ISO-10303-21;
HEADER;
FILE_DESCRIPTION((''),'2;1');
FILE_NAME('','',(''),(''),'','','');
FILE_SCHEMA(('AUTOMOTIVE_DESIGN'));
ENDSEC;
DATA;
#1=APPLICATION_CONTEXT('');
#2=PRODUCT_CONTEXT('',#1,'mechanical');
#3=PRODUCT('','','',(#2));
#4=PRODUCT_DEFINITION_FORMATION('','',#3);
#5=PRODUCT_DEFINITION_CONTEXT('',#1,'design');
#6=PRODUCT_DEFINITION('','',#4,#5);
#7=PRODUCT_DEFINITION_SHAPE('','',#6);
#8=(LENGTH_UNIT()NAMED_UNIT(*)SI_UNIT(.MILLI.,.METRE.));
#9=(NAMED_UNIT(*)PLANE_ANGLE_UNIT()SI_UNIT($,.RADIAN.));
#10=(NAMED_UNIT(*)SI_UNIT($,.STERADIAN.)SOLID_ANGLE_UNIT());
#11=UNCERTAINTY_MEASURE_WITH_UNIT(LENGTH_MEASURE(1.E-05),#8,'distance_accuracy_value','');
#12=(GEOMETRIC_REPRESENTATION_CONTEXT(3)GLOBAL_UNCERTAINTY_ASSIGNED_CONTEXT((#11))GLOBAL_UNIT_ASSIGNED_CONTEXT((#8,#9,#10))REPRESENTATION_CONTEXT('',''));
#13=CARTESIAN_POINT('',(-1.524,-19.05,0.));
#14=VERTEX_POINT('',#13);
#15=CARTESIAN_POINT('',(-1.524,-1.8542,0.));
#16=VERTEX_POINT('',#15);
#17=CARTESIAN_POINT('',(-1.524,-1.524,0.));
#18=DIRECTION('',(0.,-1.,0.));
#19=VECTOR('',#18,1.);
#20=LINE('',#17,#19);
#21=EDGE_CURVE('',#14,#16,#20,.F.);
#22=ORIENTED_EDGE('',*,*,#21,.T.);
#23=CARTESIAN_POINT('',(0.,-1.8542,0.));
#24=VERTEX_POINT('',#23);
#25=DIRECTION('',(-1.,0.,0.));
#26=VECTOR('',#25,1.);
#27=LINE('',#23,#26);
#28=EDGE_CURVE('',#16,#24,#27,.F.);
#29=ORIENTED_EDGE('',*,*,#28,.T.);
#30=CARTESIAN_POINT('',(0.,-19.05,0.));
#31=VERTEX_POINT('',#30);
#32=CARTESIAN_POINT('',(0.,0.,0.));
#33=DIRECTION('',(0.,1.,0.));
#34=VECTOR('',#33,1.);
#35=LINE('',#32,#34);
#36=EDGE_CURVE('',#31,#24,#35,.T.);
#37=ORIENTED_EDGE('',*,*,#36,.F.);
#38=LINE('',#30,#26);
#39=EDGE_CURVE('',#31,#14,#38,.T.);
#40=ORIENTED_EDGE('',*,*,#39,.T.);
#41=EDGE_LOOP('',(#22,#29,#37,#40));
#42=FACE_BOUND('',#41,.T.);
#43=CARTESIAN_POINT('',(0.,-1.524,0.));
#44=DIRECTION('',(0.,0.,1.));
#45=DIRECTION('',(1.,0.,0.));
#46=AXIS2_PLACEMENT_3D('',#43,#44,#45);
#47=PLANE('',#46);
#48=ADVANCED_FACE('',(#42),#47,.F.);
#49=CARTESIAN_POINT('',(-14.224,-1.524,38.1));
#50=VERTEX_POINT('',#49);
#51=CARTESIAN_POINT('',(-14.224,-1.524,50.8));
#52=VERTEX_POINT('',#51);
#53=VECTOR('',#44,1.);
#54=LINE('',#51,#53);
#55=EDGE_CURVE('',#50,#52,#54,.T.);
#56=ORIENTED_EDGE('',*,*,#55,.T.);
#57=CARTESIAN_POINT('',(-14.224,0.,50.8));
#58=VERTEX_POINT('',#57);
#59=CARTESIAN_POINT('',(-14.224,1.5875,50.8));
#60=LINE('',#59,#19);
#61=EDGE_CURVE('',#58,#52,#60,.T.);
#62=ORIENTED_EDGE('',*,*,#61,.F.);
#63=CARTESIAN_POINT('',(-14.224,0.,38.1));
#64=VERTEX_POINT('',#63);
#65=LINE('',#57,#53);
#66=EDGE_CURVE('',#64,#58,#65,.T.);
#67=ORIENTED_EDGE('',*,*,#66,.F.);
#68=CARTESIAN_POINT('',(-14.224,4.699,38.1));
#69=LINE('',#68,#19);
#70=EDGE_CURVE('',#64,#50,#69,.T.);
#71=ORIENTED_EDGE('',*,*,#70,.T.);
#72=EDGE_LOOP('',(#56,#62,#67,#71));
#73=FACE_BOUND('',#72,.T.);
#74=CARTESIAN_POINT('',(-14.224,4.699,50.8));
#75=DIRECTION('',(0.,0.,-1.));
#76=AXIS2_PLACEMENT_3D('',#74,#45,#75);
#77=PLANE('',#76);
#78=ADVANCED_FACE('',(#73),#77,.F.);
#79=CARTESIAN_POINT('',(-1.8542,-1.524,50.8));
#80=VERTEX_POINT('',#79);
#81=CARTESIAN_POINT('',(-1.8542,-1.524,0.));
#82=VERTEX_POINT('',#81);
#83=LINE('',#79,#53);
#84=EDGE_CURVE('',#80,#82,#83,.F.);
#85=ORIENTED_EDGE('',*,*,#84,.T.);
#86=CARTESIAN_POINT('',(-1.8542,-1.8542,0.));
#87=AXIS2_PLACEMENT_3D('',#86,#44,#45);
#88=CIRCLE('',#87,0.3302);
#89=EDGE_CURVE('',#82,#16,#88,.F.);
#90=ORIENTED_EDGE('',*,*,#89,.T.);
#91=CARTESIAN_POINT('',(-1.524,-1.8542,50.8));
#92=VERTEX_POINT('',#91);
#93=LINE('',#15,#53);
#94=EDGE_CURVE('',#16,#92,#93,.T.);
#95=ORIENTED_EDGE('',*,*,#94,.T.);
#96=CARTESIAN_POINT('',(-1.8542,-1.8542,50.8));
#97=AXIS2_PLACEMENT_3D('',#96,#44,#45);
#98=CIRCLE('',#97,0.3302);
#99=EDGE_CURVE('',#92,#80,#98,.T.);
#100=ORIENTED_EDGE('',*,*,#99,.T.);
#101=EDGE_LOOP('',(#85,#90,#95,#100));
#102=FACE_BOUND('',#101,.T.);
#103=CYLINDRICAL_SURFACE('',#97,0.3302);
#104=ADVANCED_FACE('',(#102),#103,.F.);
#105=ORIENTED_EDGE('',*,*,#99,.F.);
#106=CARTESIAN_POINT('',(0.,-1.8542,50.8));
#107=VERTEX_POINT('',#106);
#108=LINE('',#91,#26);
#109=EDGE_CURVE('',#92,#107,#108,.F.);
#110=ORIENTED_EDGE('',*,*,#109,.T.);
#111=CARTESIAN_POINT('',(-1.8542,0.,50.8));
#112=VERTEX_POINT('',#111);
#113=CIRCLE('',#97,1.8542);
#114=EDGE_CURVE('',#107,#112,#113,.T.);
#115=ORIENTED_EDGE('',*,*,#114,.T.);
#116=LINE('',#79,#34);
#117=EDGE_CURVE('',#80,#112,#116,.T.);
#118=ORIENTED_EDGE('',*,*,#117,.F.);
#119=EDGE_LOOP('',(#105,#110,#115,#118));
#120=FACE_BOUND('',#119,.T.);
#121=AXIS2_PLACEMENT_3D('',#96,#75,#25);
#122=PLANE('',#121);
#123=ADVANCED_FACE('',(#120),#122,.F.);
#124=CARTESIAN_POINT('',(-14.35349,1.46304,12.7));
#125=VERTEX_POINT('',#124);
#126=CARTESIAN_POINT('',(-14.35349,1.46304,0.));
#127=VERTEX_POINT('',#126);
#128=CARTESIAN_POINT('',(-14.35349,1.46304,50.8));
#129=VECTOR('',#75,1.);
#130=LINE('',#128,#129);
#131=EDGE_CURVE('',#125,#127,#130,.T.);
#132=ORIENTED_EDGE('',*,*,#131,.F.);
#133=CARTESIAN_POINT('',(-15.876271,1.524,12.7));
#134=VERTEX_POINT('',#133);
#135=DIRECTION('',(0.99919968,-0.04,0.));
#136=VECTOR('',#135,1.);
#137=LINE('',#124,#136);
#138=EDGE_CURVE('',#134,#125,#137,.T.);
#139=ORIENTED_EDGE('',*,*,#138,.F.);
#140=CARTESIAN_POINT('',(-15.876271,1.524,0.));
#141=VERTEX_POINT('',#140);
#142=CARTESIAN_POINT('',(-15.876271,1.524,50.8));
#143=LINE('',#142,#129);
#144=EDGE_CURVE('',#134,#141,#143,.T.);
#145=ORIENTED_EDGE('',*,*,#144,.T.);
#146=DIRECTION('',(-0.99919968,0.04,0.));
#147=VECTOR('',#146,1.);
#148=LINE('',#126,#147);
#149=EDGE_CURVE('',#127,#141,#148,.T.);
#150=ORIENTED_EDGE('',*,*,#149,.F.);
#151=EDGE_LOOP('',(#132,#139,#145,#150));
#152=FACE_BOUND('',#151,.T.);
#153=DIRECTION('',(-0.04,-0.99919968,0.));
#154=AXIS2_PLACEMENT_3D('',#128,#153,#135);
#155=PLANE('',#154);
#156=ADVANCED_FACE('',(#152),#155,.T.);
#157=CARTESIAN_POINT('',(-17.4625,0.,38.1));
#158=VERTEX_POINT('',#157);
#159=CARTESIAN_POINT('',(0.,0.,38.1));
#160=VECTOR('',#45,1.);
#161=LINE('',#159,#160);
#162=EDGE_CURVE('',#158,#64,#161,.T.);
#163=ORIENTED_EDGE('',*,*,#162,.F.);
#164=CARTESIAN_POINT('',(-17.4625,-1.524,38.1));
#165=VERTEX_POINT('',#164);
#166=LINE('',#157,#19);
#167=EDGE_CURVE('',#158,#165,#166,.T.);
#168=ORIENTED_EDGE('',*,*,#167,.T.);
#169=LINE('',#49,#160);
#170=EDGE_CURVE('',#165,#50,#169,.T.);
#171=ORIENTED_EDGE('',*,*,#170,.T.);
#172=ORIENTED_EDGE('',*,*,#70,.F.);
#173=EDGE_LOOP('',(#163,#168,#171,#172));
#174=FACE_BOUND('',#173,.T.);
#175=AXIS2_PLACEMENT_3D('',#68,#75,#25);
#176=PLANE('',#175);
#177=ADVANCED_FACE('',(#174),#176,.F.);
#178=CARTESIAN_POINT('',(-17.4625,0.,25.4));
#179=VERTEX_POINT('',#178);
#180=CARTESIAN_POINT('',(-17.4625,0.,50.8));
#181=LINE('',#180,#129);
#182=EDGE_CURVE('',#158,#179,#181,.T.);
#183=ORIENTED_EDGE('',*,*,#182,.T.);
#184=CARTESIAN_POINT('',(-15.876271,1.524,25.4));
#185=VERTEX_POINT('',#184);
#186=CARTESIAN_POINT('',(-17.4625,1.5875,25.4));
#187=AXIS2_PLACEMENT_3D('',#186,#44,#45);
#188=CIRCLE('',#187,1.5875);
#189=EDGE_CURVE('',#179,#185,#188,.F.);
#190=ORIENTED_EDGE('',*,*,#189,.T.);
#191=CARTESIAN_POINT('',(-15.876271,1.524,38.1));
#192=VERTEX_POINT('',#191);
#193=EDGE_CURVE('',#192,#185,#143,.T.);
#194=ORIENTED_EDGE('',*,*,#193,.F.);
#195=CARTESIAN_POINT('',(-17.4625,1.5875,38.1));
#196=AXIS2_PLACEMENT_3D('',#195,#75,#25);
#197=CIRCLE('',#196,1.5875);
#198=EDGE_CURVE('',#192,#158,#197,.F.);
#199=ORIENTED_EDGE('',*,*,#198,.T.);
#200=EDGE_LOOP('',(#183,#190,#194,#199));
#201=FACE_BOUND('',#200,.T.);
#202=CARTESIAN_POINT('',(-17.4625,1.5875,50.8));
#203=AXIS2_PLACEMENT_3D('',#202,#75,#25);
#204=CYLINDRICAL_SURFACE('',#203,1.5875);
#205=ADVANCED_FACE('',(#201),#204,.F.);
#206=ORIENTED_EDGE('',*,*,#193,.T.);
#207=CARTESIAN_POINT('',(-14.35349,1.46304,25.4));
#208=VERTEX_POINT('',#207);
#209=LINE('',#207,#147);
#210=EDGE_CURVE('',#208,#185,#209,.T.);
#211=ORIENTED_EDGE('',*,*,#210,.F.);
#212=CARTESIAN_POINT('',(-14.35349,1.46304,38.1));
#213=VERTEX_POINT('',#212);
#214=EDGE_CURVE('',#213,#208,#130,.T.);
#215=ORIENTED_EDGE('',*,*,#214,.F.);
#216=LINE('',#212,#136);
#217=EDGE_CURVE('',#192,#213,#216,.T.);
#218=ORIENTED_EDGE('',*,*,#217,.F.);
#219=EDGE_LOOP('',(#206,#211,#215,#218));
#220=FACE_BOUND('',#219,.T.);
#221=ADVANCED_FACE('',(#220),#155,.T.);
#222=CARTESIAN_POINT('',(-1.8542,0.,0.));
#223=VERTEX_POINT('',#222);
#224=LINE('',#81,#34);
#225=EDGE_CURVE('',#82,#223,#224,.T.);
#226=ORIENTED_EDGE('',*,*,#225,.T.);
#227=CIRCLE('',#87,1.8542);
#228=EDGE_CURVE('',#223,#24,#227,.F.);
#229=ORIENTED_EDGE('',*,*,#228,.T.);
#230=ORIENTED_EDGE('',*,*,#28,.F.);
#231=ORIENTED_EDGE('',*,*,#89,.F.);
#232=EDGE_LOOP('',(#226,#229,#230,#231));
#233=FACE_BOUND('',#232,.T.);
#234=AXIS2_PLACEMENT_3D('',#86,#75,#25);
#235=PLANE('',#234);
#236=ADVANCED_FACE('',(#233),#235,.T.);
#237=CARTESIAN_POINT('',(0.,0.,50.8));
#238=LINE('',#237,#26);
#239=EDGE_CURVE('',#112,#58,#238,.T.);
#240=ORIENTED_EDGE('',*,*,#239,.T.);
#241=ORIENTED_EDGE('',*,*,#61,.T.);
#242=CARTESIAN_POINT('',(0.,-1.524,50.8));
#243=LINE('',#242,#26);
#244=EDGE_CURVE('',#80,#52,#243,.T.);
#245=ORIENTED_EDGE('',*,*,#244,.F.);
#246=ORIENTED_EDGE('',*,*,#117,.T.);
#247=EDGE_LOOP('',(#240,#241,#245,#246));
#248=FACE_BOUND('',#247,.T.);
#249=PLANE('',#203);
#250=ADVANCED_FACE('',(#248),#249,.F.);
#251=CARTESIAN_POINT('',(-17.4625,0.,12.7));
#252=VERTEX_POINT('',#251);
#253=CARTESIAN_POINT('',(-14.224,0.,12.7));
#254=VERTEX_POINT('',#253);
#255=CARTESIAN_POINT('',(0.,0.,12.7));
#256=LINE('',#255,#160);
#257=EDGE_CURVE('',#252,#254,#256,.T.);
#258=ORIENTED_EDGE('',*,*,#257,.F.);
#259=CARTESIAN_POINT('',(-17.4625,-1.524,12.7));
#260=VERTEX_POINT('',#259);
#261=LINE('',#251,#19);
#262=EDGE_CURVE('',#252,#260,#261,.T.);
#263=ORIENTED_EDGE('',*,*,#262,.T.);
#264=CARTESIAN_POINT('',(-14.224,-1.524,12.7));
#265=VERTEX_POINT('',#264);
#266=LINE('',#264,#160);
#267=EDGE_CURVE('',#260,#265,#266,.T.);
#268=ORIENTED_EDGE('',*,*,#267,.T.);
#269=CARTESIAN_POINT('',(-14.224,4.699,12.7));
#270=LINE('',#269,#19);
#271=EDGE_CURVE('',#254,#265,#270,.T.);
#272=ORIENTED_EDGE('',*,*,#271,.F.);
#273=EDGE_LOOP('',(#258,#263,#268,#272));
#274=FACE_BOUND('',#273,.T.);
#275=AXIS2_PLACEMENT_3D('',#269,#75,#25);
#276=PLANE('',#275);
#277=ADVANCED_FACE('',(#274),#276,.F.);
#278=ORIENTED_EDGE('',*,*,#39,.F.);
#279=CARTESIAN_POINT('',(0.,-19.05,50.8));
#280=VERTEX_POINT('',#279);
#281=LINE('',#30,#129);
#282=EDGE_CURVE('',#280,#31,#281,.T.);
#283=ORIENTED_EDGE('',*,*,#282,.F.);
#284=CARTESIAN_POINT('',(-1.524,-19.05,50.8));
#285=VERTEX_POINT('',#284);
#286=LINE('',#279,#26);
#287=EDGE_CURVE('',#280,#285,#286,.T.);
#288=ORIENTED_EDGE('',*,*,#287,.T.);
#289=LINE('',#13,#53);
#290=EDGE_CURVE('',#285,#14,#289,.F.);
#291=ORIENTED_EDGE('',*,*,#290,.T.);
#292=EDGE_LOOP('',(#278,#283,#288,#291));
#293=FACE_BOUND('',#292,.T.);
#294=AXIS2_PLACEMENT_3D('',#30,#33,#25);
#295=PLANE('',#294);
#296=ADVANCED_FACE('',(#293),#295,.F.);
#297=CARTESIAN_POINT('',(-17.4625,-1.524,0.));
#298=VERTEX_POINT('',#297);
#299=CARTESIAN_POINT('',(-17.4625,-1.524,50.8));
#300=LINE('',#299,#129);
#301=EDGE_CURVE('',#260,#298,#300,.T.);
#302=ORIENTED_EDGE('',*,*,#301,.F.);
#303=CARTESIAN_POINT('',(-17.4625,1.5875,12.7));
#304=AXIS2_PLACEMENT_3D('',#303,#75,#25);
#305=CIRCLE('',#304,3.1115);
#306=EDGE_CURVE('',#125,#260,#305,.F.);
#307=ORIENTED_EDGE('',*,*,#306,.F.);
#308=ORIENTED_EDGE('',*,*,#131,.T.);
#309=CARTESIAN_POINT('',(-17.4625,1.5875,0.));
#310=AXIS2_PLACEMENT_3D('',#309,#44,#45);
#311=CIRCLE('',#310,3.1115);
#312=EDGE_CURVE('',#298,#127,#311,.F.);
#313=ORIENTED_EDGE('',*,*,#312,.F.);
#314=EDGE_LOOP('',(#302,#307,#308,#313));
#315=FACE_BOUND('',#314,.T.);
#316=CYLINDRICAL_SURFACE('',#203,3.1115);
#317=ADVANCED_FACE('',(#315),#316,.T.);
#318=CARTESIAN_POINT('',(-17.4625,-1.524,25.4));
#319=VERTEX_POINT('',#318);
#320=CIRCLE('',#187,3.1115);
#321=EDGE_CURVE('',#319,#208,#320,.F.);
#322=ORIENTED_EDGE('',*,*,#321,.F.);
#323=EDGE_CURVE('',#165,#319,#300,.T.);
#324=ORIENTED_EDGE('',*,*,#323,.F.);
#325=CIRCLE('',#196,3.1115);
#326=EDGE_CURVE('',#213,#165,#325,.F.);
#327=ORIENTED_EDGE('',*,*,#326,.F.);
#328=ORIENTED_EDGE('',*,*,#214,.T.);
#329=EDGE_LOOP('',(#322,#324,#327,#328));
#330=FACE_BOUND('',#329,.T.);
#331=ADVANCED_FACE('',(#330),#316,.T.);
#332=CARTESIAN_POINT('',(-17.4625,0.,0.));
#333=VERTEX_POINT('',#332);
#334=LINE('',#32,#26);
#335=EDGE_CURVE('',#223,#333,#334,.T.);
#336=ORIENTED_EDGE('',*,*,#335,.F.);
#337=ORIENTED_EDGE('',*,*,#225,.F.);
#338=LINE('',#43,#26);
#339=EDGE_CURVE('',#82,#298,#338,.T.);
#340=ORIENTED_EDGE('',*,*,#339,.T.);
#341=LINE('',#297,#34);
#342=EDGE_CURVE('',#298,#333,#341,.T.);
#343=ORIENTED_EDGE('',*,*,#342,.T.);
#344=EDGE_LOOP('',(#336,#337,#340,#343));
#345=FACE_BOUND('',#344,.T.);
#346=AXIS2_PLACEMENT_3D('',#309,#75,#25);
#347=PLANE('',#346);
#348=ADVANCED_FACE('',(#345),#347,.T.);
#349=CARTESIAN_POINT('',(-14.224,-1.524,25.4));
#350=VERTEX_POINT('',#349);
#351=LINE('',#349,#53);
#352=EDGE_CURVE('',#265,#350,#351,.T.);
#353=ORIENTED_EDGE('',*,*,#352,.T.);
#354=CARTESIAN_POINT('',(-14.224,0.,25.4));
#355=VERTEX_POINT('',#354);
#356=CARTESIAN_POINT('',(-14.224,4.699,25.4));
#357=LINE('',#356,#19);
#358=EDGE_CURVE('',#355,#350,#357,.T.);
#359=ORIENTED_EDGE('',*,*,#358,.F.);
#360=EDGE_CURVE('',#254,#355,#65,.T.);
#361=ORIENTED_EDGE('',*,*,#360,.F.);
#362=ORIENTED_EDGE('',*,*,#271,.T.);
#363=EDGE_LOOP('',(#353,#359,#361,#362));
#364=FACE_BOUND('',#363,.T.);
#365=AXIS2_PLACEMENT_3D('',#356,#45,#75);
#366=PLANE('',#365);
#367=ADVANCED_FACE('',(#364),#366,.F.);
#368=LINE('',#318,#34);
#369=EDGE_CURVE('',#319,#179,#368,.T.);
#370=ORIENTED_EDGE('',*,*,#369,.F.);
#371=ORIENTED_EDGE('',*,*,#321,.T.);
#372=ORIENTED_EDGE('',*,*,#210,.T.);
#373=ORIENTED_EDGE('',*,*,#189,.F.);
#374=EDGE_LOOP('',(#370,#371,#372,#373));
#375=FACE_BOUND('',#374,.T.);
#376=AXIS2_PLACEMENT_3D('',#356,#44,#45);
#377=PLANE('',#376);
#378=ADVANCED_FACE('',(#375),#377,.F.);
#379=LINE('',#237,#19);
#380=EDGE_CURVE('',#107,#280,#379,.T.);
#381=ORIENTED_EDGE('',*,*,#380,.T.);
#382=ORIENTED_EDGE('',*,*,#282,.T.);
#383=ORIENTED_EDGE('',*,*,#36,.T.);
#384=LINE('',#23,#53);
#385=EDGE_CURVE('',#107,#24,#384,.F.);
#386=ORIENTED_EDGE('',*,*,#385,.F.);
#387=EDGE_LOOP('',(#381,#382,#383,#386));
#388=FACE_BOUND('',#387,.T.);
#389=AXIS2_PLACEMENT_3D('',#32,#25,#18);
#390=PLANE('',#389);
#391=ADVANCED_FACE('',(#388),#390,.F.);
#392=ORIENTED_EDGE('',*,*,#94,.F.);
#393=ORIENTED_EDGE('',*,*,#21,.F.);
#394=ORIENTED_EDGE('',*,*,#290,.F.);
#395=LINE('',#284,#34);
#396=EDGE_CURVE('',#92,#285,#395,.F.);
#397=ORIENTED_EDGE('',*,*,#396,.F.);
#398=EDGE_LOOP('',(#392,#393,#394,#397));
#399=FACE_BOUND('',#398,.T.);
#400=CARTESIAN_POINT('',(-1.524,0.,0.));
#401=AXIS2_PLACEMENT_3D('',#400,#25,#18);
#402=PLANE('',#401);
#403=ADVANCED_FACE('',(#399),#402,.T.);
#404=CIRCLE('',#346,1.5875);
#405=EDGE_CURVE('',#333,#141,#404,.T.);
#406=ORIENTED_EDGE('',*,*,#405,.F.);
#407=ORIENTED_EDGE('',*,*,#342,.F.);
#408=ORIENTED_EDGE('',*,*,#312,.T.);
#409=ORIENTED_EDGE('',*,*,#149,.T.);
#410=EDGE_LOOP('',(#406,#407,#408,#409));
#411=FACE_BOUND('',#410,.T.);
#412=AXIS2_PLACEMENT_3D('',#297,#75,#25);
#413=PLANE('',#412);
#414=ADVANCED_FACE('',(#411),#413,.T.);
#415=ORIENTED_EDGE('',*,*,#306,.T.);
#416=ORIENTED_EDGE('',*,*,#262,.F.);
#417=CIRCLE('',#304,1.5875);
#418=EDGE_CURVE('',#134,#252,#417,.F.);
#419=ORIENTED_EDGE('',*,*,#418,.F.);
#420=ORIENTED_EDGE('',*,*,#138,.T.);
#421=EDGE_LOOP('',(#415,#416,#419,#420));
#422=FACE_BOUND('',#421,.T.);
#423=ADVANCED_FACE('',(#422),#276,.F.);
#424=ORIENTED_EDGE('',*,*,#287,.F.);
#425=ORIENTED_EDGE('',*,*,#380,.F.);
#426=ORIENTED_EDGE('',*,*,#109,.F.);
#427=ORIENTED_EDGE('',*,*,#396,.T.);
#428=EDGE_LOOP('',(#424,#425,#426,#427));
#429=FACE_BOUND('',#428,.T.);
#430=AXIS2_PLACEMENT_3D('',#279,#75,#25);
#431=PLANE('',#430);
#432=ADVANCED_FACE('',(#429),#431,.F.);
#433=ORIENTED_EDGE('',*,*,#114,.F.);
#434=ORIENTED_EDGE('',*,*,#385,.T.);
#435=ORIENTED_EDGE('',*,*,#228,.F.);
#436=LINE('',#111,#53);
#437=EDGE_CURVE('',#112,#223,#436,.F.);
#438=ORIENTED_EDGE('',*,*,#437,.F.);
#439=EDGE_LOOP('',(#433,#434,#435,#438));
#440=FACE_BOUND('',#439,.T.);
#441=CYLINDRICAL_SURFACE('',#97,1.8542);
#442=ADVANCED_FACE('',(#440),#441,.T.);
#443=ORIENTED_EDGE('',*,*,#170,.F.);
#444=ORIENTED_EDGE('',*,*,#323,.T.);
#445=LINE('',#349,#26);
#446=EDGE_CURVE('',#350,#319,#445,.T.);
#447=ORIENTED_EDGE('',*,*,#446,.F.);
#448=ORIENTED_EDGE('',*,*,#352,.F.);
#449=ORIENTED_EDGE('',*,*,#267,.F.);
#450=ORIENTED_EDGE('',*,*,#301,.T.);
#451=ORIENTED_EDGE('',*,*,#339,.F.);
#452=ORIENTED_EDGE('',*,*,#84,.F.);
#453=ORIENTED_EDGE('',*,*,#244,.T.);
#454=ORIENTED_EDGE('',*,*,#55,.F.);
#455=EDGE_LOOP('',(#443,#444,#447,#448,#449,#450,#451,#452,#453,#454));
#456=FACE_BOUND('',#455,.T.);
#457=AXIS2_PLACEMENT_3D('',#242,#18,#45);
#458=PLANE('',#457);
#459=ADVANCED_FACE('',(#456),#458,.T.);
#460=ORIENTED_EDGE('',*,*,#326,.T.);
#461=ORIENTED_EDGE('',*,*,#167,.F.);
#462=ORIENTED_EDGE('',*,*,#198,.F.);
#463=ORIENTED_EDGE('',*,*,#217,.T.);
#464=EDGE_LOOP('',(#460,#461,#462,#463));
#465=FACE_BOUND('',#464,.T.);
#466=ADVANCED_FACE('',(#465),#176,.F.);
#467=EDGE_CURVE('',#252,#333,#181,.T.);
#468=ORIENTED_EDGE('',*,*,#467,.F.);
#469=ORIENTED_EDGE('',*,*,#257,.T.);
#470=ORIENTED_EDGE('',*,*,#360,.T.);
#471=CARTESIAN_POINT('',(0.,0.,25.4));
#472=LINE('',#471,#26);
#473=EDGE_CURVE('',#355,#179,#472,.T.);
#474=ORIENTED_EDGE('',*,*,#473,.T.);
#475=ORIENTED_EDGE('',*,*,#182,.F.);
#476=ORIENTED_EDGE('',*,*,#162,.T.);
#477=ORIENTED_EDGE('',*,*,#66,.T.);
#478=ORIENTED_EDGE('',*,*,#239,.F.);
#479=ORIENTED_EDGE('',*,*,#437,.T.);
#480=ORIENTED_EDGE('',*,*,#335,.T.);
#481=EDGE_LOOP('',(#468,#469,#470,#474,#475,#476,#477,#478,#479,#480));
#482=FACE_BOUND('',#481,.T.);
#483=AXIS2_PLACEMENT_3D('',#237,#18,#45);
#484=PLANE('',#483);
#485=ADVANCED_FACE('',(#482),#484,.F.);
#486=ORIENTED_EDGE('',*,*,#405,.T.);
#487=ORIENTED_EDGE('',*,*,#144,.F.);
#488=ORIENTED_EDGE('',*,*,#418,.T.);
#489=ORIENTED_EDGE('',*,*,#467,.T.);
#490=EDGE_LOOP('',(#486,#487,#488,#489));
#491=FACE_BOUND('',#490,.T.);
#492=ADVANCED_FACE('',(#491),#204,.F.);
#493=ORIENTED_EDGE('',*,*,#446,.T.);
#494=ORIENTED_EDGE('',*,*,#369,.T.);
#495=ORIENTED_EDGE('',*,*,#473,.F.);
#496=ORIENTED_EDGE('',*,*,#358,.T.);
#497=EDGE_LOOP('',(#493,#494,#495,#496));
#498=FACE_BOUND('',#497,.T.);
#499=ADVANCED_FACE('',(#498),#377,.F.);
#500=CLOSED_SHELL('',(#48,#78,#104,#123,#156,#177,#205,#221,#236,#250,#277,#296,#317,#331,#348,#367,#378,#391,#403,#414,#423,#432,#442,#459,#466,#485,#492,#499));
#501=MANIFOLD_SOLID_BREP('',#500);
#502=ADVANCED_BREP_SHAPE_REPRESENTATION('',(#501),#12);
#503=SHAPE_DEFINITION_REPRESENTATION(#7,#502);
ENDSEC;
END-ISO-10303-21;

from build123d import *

# Parameters (mm, degrees)
BRIDA_BASE1_DEPTH                = 50.8
CROQUIS8_W                       = 6.35
CROQUIS8_H                       = 12.7
CORTAR_EXTRUIR2_DEPTH            = 56.160268355
MATRIZL1_COUNT                   = 2
MATRIZL1_PITCH                   = 25.4
BRIDA_DE_ARISTA1_STRIP_W         = 6.7564
BRIDA_DE_ARISTA1_STRIP_H         = 1.524
BRIDA_DE_ARISTA1_STRIP_CUT_DEPTH = 50.8
BRIDA_DE_ARISTA1_DEPTH           = 50.8


# Sheet-metal steps are written as plain solids
with BuildPart() as part:
    # Croquis1 → Brida base1 (new body)
    with BuildSketch(Plane.XY):
        with BuildLine():
            Line((0, 0), (-17.4625, 0))
            ThreePointArc((-17.4625, 0), (-18.562352263, 2.73226253), (-15.876270508, 1.524))
            Line((-15.876270508, 1.524), (-14.353490196, 1.46304))
            ThreePointArc((-14.353490196, 1.46304), (-19.618210435, 3.831234559), (-17.4625, -1.524))
            Line((-17.4625, -1.524), (0, -1.524))
            Line((0, -1.524), (0, 0))
        make_face()
    extrude(amount=BRIDA_BASE1_DEPTH)

    # Croquis8 → Cortar-Extruir2 (cut, through all)
    with BuildSketch(Plane.XZ.offset(1.524)):
        with Locations((-17.399, 44.45)):
            Rectangle(CROQUIS8_W, CROQUIS8_H)
    cortar_extruir2 = extrude(amount=-CORTAR_EXTRUIR2_DEPTH, mode=Mode.SUBTRACT)

    # MatrizL1: Cortar-Extruir2 ×2
    with Locations(*[(0, 0, -i * MATRIZL1_PITCH) for i in range(1, MATRIZL1_COUNT)]):
        add(cortar_extruir2, mode=Mode.SUBTRACT)

    # Brida de arista1 strip (across the edge) → Brida de arista1 strip cut (cut)
    with BuildSketch(Plane(origin=(0, -1.524, 0), x_dir=(-1, 0, 0), z_dir=(0, 0, 1))):
        with Locations((-1.524, -0.762)):
            Rectangle(BRIDA_DE_ARISTA1_STRIP_W, BRIDA_DE_ARISTA1_STRIP_H)
    extrude(amount=BRIDA_DE_ARISTA1_STRIP_CUT_DEPTH, mode=Mode.SUBTRACT)

    # Brida de arista1 section (across the edge) → Brida de arista1 (add)
    with BuildSketch(Plane(origin=(0, -1.524, 0), x_dir=(-1, 0, 0), z_dir=(0, 0, 1))):
        with BuildLine():
            Line((0, 0.3302), (0, 17.526))
            Line((0, 17.526), (1.524, 17.526))
            Line((1.524, 17.526), (1.524, 0.3302))
            ThreePointArc((1.524, 0.3302), (1.620713341, 0.096713341), (1.8542, 0))
            Line((1.8542, 0), (1.8542, -1.524))
            ThreePointArc((1.8542, -1.524), (0.543082606, -0.980917394), (0, 0.3302))
        make_face()
    extrude(amount=BRIDA_DE_ARISTA1_DEPTH)


solid = part.part
